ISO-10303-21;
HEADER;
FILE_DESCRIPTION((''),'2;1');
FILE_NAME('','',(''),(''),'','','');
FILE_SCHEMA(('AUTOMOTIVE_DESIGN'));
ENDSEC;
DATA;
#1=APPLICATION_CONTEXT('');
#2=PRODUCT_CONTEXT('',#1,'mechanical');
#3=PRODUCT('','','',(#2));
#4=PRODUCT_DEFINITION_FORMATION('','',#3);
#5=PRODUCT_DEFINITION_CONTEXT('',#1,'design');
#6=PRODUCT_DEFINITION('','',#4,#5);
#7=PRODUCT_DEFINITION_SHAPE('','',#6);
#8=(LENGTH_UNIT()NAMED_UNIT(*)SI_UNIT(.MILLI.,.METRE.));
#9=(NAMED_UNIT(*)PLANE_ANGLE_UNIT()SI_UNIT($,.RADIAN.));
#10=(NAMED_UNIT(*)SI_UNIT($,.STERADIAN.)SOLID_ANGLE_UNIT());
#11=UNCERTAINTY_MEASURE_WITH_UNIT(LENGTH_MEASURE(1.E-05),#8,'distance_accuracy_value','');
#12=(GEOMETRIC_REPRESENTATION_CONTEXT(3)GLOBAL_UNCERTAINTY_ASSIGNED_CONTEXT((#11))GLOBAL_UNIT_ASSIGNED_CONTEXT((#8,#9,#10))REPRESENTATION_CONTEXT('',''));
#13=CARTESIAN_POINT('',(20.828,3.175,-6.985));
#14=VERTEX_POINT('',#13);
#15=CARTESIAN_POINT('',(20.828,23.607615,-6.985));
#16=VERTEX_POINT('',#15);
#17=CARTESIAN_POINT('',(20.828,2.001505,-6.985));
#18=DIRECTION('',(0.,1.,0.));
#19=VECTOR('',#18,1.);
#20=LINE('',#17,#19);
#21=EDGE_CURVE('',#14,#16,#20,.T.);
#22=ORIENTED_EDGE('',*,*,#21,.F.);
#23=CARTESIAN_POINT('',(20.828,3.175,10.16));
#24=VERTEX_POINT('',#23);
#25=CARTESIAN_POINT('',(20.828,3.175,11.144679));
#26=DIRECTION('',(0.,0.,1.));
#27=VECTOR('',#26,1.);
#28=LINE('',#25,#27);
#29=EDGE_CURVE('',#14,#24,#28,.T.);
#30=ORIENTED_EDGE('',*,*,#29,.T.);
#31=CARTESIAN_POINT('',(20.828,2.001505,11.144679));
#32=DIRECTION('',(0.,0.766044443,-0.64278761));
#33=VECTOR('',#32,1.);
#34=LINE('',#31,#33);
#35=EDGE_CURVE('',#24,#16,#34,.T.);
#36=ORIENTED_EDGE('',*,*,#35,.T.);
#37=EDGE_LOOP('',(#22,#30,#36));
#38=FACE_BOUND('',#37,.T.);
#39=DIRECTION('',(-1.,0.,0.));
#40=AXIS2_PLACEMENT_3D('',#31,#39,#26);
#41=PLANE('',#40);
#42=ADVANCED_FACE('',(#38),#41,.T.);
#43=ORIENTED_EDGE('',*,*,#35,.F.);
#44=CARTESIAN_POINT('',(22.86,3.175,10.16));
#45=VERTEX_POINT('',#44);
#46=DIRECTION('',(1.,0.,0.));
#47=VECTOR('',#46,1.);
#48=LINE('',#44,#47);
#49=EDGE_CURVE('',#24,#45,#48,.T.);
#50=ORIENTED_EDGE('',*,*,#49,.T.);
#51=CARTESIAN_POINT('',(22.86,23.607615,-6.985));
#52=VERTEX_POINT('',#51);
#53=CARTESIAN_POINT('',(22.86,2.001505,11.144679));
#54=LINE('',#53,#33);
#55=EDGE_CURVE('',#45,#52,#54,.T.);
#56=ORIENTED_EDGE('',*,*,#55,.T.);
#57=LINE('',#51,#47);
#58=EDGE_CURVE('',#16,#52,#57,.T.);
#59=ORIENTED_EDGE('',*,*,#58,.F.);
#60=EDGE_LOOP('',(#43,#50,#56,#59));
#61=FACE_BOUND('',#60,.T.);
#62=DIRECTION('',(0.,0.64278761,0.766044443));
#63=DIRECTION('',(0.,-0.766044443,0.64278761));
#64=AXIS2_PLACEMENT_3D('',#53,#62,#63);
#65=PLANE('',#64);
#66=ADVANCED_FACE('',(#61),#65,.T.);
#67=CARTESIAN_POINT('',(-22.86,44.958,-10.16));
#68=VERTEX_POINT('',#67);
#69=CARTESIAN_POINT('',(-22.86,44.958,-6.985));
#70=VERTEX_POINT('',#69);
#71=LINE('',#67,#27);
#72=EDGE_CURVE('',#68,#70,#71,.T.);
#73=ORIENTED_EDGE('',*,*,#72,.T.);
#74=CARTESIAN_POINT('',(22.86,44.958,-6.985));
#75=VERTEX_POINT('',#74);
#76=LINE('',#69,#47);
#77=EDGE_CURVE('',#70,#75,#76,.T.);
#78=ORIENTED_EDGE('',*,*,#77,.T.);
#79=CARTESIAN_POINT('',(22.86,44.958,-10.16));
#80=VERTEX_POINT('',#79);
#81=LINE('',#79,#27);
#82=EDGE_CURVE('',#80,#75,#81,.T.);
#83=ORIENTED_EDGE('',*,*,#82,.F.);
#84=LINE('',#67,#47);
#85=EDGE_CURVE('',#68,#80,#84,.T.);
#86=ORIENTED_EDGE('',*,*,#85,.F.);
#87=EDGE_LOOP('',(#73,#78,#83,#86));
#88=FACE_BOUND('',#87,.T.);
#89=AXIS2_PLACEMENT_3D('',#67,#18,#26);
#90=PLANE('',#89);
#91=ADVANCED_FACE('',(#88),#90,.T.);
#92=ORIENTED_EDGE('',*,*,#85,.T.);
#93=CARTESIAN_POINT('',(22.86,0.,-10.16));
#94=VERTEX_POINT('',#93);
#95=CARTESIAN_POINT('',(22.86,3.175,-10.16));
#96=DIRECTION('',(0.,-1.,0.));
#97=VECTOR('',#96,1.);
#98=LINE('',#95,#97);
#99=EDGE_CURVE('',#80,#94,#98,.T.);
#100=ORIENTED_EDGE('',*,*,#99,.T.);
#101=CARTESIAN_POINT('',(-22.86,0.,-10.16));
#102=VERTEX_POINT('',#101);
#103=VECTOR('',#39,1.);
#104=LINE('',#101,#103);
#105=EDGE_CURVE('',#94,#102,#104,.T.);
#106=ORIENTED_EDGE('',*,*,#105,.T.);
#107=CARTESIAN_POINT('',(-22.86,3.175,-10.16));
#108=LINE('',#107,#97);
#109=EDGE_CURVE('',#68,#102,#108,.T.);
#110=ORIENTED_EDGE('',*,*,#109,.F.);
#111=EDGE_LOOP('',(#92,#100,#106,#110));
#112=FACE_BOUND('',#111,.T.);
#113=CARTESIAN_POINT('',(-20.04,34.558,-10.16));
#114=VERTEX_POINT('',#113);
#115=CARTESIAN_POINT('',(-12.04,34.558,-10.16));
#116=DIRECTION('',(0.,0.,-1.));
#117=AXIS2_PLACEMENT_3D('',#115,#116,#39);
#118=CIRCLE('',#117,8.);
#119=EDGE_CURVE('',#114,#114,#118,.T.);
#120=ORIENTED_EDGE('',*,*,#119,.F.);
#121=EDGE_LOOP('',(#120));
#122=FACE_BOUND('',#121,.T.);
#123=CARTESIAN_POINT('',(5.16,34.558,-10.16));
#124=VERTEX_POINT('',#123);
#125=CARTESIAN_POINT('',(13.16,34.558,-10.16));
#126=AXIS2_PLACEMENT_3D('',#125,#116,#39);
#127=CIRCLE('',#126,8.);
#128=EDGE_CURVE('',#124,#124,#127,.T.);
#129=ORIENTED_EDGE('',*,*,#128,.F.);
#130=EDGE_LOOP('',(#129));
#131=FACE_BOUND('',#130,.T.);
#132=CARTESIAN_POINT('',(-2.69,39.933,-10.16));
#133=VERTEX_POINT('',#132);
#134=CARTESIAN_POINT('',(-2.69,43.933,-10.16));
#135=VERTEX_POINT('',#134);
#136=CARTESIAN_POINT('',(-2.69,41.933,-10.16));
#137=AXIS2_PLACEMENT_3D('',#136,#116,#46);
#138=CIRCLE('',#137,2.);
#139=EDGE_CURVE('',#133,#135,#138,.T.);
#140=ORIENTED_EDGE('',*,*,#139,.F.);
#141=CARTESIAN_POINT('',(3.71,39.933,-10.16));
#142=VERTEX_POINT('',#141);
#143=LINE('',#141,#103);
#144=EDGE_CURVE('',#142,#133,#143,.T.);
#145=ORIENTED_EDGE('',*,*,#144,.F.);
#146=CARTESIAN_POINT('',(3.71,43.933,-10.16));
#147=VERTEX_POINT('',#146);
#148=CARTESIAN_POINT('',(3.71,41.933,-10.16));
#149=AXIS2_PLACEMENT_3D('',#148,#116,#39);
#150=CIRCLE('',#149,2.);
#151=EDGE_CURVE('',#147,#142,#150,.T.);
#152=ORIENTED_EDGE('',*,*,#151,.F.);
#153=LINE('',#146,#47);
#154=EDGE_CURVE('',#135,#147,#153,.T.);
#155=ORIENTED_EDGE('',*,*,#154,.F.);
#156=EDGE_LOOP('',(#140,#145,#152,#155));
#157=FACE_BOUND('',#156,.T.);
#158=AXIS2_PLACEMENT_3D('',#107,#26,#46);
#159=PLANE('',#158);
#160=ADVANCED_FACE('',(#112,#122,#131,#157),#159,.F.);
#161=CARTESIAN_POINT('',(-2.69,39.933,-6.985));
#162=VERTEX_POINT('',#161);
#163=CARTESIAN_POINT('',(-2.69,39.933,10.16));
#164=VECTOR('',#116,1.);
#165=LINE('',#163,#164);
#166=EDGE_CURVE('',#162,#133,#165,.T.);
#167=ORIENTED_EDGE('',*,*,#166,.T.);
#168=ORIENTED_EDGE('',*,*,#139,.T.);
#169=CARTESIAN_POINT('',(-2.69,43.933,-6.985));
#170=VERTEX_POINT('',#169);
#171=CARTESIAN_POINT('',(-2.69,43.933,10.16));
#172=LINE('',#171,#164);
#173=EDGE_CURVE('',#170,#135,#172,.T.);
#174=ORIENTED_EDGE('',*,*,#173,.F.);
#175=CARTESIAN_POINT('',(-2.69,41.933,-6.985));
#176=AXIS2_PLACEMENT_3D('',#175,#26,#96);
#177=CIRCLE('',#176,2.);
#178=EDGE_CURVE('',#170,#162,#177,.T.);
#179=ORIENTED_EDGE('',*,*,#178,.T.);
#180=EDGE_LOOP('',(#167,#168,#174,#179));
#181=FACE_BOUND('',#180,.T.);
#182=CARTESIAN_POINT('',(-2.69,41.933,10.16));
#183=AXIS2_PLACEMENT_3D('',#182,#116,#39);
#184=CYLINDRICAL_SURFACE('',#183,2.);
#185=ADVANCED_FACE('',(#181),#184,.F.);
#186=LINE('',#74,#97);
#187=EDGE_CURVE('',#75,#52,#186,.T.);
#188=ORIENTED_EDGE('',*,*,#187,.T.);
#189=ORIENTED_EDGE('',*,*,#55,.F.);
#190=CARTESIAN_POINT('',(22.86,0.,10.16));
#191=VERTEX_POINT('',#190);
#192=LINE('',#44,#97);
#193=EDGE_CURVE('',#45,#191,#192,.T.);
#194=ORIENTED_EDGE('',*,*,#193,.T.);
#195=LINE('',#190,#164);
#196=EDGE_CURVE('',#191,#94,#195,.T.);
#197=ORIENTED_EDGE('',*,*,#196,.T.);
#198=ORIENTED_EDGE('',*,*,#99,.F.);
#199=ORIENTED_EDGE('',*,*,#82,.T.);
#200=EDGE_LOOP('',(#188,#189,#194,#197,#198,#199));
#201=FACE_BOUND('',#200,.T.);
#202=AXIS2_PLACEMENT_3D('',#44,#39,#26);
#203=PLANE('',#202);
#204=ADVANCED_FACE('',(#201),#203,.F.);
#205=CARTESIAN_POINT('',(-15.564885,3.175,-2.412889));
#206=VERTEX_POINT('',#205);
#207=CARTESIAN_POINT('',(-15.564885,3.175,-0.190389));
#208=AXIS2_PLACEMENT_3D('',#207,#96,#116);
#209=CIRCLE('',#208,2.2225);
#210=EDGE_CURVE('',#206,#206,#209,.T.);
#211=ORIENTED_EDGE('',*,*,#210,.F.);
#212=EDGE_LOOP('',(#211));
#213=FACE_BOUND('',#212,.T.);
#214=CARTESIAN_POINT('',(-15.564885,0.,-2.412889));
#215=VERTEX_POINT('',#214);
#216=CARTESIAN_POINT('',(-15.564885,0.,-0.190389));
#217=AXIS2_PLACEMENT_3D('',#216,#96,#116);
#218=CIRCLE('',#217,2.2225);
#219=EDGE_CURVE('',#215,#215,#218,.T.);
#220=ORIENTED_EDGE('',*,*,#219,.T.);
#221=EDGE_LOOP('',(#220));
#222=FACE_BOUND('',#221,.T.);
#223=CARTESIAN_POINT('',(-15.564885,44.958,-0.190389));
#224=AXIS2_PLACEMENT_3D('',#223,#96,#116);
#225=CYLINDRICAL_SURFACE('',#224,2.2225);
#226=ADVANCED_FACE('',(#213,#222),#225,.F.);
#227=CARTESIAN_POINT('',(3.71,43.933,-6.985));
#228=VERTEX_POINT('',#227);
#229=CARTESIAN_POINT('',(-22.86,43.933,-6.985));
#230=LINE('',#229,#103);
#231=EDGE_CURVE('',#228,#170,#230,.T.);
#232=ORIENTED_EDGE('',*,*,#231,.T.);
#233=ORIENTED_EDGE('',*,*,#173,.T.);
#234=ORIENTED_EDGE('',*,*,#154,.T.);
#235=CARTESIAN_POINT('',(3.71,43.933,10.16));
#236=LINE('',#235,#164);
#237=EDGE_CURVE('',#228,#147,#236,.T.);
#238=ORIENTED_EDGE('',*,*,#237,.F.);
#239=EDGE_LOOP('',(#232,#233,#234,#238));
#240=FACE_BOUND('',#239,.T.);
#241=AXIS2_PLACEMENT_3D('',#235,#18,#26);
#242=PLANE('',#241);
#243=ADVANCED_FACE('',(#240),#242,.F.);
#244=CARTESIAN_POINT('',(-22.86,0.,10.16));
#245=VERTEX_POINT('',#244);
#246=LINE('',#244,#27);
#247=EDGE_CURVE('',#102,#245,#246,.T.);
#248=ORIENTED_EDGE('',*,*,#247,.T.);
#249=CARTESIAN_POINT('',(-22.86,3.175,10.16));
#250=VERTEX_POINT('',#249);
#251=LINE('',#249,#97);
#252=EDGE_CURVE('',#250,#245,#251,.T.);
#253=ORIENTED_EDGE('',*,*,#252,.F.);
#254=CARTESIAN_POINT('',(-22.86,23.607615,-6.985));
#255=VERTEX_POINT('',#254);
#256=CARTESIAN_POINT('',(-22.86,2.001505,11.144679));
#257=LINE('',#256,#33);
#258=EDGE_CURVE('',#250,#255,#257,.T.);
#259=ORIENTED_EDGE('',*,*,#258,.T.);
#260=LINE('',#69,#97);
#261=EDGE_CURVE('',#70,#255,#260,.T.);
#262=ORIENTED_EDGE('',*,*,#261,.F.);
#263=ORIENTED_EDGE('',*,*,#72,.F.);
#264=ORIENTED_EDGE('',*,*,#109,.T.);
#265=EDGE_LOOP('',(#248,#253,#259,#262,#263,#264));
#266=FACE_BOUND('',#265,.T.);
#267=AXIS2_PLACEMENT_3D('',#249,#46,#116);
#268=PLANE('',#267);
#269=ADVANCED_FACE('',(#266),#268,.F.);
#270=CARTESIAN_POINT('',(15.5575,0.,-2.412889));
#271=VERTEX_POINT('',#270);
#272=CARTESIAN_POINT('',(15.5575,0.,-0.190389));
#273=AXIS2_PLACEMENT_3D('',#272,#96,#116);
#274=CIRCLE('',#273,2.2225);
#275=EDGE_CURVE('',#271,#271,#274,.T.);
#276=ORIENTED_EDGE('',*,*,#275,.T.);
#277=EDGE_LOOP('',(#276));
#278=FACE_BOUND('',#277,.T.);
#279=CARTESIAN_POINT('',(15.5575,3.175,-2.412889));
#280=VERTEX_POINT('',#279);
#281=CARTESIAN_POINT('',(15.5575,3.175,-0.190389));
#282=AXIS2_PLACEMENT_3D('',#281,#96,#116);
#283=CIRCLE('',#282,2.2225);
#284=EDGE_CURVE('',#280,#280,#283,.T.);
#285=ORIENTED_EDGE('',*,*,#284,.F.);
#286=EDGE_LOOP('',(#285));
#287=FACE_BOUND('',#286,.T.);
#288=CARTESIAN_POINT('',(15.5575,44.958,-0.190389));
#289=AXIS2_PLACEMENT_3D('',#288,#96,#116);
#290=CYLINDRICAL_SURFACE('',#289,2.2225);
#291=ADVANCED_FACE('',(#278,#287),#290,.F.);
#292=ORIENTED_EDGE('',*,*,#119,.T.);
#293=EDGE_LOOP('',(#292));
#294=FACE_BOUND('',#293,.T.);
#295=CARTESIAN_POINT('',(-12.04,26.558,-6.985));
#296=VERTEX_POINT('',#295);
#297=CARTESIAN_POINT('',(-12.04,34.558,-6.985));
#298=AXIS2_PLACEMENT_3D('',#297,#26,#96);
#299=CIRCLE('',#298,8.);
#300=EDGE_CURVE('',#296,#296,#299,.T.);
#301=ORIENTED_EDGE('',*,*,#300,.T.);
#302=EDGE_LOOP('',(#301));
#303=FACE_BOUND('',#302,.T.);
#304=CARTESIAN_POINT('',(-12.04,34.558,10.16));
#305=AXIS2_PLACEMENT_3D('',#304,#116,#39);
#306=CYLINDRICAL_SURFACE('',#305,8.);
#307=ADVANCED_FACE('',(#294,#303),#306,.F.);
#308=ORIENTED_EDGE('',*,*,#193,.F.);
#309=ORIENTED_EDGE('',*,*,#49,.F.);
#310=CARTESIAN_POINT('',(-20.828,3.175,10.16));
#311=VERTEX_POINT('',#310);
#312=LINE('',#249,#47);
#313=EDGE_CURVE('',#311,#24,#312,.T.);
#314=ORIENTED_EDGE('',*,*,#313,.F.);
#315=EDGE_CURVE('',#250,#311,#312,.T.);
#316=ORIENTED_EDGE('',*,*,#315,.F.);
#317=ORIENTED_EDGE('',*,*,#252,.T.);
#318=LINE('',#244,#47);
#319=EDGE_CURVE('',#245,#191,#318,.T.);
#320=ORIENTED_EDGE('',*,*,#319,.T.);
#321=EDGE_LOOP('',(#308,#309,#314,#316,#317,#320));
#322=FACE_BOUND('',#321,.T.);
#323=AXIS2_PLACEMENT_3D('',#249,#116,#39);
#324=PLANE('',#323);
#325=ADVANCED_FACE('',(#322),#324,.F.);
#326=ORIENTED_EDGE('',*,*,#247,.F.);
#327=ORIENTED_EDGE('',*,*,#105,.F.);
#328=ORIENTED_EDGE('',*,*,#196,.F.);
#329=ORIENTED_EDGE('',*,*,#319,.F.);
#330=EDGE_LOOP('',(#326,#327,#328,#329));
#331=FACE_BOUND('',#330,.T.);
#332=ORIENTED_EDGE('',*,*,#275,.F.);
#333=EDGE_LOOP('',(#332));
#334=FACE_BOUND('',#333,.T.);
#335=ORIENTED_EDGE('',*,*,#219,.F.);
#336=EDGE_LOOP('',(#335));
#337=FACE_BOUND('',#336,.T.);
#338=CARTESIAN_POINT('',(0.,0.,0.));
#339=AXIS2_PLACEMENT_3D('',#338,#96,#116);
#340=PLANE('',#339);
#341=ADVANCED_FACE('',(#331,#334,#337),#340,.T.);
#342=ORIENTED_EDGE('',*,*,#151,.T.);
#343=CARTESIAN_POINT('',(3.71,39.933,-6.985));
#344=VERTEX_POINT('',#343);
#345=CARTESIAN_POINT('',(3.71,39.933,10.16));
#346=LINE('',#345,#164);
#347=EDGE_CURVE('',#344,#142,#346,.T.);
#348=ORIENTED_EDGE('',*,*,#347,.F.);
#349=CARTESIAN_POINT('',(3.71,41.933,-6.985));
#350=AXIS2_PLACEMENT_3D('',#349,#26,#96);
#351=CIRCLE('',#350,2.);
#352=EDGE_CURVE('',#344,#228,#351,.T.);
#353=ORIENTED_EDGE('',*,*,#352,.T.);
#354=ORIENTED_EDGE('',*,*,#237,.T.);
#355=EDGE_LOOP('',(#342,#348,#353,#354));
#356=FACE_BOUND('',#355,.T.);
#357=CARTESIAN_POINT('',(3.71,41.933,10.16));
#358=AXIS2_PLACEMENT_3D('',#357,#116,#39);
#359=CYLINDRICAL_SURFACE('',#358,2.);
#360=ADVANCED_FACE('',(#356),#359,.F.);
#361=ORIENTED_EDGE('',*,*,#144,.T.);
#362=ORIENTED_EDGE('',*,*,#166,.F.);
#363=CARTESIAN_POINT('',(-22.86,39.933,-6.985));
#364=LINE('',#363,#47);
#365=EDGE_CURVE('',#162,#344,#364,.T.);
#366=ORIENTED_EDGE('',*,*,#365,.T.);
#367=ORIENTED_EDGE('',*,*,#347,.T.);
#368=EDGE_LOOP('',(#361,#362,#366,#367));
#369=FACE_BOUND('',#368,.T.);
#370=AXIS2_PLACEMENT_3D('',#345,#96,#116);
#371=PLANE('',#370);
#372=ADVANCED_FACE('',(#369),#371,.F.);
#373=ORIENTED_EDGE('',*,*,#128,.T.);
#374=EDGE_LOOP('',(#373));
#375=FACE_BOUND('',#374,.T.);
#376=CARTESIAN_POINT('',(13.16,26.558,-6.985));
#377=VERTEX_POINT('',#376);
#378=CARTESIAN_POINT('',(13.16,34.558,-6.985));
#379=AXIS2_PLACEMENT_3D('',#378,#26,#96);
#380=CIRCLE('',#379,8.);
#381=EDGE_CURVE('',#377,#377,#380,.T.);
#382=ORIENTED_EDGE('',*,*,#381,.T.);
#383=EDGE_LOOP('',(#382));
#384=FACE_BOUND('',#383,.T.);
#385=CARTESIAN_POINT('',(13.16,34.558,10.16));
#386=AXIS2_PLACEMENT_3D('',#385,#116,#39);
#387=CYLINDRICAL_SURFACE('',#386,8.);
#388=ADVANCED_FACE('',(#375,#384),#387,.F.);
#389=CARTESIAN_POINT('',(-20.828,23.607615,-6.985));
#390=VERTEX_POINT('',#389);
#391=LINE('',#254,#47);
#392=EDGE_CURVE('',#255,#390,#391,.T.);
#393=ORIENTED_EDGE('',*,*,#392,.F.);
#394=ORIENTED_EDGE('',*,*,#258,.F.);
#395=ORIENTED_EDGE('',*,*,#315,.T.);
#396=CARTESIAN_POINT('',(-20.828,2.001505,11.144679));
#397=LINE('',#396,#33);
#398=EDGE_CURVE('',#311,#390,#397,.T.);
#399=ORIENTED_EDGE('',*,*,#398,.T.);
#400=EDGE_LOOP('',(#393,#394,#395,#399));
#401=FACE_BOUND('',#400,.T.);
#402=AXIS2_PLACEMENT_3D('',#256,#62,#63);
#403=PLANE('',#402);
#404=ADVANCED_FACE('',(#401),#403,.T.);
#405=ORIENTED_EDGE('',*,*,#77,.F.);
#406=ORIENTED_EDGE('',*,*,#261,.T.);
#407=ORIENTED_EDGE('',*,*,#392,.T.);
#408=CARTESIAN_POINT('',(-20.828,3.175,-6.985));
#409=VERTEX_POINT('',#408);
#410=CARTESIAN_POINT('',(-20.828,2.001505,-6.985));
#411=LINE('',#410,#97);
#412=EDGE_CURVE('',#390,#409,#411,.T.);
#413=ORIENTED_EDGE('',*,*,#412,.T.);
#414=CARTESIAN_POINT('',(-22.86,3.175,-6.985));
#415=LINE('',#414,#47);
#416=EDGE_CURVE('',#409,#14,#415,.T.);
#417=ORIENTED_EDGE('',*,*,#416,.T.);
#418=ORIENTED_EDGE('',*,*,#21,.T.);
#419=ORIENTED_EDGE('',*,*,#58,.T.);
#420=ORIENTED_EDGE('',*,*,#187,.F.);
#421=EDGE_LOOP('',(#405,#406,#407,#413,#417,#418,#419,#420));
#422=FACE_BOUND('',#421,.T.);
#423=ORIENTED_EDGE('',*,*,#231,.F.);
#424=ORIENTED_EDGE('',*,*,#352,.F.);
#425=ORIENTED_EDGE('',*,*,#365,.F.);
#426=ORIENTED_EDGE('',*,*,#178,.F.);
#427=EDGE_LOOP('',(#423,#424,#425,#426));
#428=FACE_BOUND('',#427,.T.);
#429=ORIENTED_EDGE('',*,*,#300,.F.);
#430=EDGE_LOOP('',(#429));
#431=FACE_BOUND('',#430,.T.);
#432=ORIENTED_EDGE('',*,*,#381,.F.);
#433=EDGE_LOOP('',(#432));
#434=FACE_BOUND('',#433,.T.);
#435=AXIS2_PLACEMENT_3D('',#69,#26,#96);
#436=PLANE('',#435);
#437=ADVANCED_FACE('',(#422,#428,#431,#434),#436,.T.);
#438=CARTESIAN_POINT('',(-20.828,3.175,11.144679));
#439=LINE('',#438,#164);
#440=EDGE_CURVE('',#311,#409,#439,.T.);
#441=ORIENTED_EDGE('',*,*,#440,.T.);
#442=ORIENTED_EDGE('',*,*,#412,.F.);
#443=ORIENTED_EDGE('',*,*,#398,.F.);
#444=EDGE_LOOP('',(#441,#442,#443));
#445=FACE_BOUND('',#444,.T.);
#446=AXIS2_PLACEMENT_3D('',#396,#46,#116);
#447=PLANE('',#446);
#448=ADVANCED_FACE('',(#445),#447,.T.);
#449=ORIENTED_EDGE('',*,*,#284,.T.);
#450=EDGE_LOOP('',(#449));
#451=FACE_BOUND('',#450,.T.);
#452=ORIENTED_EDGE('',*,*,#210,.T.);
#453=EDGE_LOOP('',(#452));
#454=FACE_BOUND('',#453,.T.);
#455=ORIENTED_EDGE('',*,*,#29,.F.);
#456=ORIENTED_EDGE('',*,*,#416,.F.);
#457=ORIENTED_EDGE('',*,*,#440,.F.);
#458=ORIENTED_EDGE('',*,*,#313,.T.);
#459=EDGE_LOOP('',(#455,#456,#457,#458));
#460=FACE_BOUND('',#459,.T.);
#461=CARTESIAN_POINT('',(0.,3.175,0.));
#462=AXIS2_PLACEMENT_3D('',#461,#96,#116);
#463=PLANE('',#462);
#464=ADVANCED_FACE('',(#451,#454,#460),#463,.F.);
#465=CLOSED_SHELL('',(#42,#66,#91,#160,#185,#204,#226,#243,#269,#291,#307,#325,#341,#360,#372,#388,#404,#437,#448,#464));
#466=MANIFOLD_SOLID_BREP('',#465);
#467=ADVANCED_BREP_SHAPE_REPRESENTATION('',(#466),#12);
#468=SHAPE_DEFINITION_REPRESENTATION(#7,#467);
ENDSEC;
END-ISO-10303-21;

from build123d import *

# Parameters (mm, degrees)
SKETCH1_W           = 45.72
SKETCH1_H           = 20.32
BOSS_EXTRUDE1_DEPTH = 3.175
SKETCH2_W           = 3.175
SKETCH2_H           = 41.783
BOSS_EXTRUDE2_DEPTH = 45.72
SWEEP1_START        = -22.86
SWEEP1_DEPTH        = 2.032
SWEEP1_START_2      = 20.828
SWEEP1_2_DEPTH      = 2.032
SKETCH5_R           = 8
CUT_EXTRUDE1_DEPTH  = 55.375580585
SKETCH6_R           = 2.2225
CUT_EXTRUDE2_DEPTH  = 52.449265923


# Read off the part's stored shape, not the designer's step: Sweep1
with BuildPart() as part:
    # Sketch1 → Boss-Extrude1 (new body)
    with BuildSketch(Plane(origin=(0, 0, 0), x_dir=(1, 0, 0), z_dir=(0, 1, 0))):
        Rectangle(SKETCH1_W, SKETCH1_H)
    extrude(amount=BOSS_EXTRUDE1_DEPTH)

    # Sketch2 → Boss-Extrude2 (add)
    with BuildSketch(Plane(origin=(22.86, 0, 0), x_dir=(0, 0, -1), z_dir=(1, 0, 0))):
        with Locations((8.5725, 24.0665)):
            Rectangle(SKETCH2_W, SKETCH2_H)
    extrude(amount=-BOSS_EXTRUDE2_DEPTH)

    # Sweep1 outline → Sweep1 (add)
    with BuildSketch(Plane.YZ.offset(SWEEP1_START)):
        Polygon((3.175, -6.985), (23.607615345, -6.985), (3.175, 10.16), align=None)
    extrude(amount=SWEEP1_DEPTH)

    # Sweep1 2 outline → Sweep1 2 (add)
    with BuildSketch(Plane.YZ.offset(SWEEP1_START_2)):
        Polygon((3.175, -6.985), (23.607615345, -6.985), (3.175, 10.16), align=None)
    extrude(amount=SWEEP1_2_DEPTH)

    # Sketch5 → Cut-Extrude1 (cut, through all)
    with BuildSketch(Plane(origin=(0, 0, -10.16), x_dir=(-1, 0, 0), z_dir=(0, 0, -1))):
        with Locations((-13.16, 34.558)):
            Circle(SKETCH5_R)
        with Locations((12.04, 34.558)):
            Circle(SKETCH5_R)
        with BuildLine():
            Line((-3.71, 43.933), (2.69, 43.933))
            ThreePointArc((2.69, 43.933), (4.69, 41.933), (2.69, 39.933))
            Line((2.69, 39.933), (-3.71, 39.933))
            ThreePointArc((-3.71, 39.933), (-5.71, 41.933), (-3.71, 43.933))
        make_face()
    extrude(amount=-CUT_EXTRUDE1_DEPTH, mode=Mode.SUBTRACT)

    # Sketch6 → Cut-Extrude2 (cut, through all)
    with BuildSketch(Plane.XZ):
        with Locations(Location((-15.564885413, -0.190388698, 0), (0, 0, 270))):
            Circle(SKETCH6_R)
        with Locations(Location((15.5575, -0.190388698, 0), (0, 0, 270))):
            Circle(SKETCH6_R)
    extrude(amount=-CUT_EXTRUDE2_DEPTH, mode=Mode.SUBTRACT)


solid = part.part
